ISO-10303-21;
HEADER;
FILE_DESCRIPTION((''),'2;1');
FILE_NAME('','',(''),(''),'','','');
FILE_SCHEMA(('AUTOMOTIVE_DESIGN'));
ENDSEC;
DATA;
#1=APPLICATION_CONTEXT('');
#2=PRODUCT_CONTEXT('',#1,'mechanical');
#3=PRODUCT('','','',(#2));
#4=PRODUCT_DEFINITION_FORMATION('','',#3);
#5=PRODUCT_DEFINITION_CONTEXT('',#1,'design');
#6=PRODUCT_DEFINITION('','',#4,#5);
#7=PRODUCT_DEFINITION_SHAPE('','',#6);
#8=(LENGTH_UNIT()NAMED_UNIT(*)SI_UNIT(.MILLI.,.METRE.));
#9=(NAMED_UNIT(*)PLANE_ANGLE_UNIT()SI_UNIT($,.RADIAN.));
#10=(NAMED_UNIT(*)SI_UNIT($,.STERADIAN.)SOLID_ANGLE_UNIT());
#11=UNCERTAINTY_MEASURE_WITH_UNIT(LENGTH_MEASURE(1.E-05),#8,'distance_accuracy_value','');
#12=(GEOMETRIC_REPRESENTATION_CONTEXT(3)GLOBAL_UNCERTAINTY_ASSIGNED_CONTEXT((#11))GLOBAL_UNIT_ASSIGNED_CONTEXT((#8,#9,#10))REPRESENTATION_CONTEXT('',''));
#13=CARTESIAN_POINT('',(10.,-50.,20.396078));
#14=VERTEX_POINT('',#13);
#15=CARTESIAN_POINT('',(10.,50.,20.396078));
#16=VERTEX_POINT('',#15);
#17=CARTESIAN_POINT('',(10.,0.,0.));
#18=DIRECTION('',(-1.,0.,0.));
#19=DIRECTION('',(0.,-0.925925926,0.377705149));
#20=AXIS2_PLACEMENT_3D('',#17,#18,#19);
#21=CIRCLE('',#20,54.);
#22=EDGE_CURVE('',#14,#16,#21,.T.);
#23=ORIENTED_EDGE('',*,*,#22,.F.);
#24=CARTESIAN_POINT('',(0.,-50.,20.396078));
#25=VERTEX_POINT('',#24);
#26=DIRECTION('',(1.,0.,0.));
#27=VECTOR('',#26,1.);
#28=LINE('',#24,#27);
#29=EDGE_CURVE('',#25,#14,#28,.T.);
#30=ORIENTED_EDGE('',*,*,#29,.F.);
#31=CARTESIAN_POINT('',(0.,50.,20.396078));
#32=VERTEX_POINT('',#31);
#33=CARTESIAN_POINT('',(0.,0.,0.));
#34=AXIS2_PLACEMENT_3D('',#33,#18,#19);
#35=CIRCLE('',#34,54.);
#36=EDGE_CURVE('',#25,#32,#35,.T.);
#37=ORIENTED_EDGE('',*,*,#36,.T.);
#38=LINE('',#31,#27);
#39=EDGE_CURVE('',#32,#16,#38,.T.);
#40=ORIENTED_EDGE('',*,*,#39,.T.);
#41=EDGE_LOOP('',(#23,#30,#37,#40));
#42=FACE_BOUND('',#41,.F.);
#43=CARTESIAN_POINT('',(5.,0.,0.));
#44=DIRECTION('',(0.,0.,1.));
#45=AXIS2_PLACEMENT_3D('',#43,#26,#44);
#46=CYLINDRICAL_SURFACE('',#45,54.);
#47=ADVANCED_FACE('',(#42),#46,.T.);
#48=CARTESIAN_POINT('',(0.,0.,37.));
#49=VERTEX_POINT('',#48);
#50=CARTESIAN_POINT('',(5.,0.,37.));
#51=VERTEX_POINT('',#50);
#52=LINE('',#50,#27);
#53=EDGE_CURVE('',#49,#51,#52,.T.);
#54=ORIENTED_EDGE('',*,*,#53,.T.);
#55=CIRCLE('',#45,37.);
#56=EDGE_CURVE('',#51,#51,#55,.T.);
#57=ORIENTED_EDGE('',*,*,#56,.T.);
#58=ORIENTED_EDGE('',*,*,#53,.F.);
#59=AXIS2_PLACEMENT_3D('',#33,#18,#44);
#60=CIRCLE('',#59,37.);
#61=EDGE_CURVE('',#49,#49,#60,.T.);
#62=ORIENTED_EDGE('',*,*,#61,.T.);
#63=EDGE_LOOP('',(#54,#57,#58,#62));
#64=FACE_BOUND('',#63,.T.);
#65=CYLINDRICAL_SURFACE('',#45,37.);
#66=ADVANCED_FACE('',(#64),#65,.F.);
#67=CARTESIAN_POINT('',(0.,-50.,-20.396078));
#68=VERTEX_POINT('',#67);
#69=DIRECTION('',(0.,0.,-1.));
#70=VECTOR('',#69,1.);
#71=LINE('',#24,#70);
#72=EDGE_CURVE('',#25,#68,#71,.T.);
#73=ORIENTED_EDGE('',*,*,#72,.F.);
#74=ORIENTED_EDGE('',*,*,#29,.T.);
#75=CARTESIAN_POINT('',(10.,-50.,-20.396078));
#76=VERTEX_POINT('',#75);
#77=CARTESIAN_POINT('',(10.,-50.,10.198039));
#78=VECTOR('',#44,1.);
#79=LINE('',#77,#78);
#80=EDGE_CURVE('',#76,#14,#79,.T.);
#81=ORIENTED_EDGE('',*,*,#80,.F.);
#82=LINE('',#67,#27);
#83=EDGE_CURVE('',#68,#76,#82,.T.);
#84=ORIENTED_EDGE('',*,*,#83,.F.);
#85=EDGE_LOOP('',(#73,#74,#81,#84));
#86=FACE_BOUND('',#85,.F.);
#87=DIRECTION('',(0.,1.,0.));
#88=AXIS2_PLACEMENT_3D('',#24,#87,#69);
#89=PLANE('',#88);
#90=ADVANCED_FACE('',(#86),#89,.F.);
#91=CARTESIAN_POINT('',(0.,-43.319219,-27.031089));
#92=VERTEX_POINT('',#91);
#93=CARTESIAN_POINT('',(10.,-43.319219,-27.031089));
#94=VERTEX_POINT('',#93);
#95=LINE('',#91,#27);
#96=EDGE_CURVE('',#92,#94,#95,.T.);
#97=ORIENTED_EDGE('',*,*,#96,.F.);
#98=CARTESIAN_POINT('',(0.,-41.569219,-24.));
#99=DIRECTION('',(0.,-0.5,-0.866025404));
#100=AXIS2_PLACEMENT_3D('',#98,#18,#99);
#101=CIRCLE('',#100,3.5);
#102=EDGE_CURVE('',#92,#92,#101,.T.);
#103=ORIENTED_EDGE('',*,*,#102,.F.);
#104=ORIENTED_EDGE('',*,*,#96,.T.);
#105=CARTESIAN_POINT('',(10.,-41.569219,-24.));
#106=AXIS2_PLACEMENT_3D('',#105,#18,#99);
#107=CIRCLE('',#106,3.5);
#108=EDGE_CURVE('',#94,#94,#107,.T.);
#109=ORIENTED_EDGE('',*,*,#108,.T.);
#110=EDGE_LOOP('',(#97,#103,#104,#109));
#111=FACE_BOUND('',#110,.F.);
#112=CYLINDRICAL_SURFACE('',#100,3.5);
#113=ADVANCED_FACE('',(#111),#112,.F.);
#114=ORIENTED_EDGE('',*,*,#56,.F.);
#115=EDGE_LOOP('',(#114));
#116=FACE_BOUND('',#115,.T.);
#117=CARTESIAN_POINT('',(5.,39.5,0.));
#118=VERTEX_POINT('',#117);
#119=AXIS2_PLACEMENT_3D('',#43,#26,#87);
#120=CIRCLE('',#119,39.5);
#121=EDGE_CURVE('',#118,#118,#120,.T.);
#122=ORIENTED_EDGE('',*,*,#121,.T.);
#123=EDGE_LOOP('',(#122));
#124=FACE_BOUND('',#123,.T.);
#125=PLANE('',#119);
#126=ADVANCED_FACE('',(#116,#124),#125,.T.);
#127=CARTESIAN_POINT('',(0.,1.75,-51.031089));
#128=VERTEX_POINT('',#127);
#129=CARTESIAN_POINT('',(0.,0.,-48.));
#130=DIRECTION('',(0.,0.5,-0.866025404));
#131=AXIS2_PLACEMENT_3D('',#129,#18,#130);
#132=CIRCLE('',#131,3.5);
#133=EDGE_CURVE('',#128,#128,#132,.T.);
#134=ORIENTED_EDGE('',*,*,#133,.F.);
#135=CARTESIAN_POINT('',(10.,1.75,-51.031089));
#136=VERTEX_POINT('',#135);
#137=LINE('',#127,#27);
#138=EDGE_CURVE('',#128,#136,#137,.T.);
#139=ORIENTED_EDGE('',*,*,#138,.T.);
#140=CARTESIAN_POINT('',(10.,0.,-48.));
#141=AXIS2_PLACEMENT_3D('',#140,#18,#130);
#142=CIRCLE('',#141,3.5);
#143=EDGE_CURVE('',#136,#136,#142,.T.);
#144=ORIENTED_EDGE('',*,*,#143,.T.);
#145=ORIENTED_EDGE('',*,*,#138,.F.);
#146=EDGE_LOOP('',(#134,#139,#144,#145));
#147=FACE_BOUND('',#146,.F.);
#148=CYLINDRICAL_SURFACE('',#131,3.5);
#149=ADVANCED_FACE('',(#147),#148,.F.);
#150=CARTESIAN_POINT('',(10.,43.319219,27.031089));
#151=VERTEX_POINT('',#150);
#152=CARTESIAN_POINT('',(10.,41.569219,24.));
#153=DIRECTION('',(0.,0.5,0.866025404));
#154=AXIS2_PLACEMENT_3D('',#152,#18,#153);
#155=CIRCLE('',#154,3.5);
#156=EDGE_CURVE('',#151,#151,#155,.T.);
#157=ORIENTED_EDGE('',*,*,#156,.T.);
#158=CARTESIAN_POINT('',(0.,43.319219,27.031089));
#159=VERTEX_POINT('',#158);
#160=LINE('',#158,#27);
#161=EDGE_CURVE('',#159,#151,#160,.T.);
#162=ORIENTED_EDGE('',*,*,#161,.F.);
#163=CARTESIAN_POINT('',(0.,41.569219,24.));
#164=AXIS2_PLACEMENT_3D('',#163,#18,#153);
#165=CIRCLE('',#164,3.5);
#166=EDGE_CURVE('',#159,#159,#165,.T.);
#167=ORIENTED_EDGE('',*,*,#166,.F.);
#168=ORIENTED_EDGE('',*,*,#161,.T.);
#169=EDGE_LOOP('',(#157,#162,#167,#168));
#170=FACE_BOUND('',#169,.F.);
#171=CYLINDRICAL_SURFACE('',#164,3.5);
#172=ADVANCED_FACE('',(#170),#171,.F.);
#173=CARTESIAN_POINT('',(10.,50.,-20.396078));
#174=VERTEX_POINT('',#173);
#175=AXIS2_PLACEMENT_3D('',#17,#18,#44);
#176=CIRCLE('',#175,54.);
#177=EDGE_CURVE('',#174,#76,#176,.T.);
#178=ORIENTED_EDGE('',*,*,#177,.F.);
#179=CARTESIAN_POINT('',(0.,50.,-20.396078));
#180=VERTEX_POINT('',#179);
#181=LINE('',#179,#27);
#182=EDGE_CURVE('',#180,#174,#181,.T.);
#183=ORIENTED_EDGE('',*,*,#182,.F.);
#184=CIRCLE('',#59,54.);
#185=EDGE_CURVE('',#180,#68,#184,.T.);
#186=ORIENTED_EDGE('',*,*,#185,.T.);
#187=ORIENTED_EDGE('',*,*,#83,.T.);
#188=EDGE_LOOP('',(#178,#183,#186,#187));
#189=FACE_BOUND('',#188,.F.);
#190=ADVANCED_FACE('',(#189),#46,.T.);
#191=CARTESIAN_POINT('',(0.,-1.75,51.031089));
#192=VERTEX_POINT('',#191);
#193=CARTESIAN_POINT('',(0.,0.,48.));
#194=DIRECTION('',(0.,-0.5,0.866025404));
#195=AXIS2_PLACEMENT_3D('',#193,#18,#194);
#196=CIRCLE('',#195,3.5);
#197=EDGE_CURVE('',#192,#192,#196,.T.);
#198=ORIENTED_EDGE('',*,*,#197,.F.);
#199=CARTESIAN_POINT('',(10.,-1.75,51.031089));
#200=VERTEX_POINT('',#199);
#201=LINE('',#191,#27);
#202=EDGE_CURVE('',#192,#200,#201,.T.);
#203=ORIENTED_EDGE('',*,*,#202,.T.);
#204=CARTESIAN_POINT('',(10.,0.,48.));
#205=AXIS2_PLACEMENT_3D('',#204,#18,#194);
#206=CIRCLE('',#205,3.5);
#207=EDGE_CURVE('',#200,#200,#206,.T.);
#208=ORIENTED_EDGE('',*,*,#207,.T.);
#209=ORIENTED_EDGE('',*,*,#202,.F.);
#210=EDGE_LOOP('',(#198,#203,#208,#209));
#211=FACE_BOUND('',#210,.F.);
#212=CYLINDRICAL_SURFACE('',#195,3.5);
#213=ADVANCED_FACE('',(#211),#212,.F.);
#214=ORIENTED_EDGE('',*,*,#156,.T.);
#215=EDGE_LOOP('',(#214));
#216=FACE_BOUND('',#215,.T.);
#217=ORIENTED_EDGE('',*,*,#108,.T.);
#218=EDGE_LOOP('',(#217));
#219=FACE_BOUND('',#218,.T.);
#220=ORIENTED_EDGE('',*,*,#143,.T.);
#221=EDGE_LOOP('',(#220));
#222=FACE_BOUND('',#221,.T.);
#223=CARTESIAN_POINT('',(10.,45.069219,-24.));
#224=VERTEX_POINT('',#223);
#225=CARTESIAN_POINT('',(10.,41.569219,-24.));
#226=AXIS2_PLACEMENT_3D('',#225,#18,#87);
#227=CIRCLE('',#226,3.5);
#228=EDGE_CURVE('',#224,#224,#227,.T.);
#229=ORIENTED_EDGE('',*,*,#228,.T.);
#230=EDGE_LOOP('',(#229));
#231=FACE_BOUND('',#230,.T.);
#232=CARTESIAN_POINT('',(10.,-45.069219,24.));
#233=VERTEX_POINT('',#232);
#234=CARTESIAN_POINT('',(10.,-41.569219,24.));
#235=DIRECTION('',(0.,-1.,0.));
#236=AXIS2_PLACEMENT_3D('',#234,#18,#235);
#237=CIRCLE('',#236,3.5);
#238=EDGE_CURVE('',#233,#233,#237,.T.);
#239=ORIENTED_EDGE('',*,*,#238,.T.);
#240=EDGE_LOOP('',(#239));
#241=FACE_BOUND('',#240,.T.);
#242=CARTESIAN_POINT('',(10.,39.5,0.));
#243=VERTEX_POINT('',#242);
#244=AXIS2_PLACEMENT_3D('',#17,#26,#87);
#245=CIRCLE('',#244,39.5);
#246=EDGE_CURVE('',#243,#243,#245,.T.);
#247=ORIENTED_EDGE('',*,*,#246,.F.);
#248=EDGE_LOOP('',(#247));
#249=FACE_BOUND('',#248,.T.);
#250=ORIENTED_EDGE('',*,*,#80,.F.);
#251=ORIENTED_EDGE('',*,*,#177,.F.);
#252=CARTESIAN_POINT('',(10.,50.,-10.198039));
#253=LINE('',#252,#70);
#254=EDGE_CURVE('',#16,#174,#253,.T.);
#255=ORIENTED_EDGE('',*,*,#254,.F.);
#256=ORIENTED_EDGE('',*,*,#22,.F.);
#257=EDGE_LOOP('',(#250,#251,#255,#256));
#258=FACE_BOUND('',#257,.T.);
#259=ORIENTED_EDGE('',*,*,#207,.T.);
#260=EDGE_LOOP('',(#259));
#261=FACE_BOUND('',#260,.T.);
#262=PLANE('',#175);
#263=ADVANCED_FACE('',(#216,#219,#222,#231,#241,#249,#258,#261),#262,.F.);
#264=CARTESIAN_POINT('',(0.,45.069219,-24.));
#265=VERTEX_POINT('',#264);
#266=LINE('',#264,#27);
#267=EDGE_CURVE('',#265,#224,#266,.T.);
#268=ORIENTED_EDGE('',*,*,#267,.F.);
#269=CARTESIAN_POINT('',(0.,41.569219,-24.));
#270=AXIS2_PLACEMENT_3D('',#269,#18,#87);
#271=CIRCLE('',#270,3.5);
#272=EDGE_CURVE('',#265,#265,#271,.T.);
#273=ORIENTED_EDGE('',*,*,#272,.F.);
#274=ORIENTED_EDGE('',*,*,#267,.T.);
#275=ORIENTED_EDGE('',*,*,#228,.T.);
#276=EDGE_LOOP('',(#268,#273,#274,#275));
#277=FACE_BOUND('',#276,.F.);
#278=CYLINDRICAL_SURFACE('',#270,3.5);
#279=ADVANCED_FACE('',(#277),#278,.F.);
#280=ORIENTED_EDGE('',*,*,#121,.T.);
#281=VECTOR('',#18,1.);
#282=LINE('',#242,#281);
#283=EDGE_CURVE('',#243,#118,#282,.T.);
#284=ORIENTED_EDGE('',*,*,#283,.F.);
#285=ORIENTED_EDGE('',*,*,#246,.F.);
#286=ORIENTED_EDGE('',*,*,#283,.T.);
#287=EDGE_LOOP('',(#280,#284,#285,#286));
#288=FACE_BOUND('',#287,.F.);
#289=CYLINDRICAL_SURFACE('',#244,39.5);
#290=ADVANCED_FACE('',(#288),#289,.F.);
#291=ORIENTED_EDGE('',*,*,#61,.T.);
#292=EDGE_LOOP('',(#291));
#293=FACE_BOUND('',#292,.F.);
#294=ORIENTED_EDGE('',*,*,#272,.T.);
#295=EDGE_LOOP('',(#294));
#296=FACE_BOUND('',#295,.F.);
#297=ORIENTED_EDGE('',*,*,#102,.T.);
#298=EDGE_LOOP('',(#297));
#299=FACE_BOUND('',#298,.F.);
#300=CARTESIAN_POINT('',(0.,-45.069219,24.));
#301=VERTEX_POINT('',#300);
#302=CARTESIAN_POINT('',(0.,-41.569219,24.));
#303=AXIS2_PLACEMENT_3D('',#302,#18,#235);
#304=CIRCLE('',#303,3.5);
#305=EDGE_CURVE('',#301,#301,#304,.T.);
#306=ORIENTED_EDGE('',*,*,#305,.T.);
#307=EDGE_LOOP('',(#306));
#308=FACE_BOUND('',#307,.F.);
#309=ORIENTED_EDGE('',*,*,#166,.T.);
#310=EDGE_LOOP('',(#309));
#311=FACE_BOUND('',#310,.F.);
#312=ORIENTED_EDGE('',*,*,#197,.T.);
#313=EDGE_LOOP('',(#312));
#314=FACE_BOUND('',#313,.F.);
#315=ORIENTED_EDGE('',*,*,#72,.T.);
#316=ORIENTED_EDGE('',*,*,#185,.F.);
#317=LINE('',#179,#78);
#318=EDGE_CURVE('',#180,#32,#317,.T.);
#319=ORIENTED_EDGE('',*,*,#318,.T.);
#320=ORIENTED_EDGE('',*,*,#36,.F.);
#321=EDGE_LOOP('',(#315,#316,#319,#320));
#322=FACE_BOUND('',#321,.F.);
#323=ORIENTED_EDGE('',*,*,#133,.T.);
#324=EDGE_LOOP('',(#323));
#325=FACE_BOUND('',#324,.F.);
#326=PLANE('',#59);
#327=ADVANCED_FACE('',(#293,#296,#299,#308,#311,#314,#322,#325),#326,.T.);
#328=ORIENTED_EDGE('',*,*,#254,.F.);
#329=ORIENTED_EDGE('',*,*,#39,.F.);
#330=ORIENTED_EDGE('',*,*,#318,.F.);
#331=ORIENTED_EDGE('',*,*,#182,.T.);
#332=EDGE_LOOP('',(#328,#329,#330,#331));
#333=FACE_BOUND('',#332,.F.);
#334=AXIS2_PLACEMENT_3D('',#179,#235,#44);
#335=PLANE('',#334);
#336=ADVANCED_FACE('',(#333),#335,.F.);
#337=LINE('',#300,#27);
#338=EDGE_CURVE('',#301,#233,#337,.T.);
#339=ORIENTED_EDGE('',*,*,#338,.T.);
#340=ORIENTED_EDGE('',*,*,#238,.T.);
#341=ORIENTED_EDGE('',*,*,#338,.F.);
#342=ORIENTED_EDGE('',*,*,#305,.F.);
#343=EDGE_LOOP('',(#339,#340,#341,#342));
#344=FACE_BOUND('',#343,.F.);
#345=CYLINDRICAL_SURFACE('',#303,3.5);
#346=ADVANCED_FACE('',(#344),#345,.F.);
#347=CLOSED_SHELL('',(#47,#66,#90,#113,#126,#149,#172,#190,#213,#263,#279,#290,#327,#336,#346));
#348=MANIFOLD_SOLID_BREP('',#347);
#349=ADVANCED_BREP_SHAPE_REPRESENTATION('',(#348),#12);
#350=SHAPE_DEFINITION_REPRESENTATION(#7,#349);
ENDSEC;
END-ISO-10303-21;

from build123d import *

# Parameters (mm, degrees)
F0_W            = 10
F0_H            = 17
F2_R            = 3.5
F3_DEPTH        = 10.001
F3_COPIES_COUNT = 6
F5_DEPTH        = 10.001
F6_R            = 39.5
F6_R_2          = 37
F7_DEPTH        = 5


# Not quite as in the source:
# - a pattern or mirror of a feature is missing from the dataset's text; its kind, count and spacing are read off the source's solid


with BuildPart() as f1:
    # F0 (on Front) → F1 (revolve)
    with BuildSketch(Plane.XZ):
        with Locations((5, 45.5)):
            Rectangle(F0_W, F0_H)
    revolve(axis=Axis((-28.7704151153, 0, 0), (-1, 0, 0)))

    # F2 (on face) → F3 (cut, through all)
    with BuildSketch(Plane(origin=(0, 0, 0), x_dir=(0, -1, 0), z_dir=(-1, 0, 0))):
        with Locations((41.5692193817, 24)):
            Circle(F2_R)
    f3 = extrude(amount=-F3_DEPTH, mode=Mode.SUBTRACT)

    # F3_copies: F3 ×6 about axis
    f3_copies_axis = Axis((0, 0, 0), (1, 0, 0))
    for i in range(1, F3_COPIES_COUNT):
        add(f3.rotate(f3_copies_axis, i * 360 / F3_COPIES_COUNT), mode=Mode.SUBTRACT)

    # F4 (on face) → F5 (cut, through all)
    with BuildSketch(Plane(origin=(0, 0, 0), x_dir=(0, -1, 0), z_dir=(-1, 0, 0))):
        with BuildLine():
            Line((-50, -20.3960780544), (-50, 20.3960780544))
            ThreePointArc((-50, 20.3960780544), (-54, 0), (-50, -20.3960780544))
        make_face()
        with BuildLine():
            ThreePointArc((54, 0), (52.990565198, 10.3923048454), (50, 20.3960780544))
            Line((50, 20.3960780544), (50, -20.3960780544))
            ThreePointArc((50, -20.3960780544), (52.990565198, -10.3923048454), (54, 0))
        make_face()
    extrude(amount=-F5_DEPTH, mode=Mode.SUBTRACT)

    # F6 (on face) → F7 (cut)
    with BuildSketch(Plane.YZ.offset(10)):
        Circle(F6_R)
        Circle(F6_R_2, mode=Mode.SUBTRACT)
    extrude(amount=-F7_DEPTH, mode=Mode.SUBTRACT)


solid = f1.part
